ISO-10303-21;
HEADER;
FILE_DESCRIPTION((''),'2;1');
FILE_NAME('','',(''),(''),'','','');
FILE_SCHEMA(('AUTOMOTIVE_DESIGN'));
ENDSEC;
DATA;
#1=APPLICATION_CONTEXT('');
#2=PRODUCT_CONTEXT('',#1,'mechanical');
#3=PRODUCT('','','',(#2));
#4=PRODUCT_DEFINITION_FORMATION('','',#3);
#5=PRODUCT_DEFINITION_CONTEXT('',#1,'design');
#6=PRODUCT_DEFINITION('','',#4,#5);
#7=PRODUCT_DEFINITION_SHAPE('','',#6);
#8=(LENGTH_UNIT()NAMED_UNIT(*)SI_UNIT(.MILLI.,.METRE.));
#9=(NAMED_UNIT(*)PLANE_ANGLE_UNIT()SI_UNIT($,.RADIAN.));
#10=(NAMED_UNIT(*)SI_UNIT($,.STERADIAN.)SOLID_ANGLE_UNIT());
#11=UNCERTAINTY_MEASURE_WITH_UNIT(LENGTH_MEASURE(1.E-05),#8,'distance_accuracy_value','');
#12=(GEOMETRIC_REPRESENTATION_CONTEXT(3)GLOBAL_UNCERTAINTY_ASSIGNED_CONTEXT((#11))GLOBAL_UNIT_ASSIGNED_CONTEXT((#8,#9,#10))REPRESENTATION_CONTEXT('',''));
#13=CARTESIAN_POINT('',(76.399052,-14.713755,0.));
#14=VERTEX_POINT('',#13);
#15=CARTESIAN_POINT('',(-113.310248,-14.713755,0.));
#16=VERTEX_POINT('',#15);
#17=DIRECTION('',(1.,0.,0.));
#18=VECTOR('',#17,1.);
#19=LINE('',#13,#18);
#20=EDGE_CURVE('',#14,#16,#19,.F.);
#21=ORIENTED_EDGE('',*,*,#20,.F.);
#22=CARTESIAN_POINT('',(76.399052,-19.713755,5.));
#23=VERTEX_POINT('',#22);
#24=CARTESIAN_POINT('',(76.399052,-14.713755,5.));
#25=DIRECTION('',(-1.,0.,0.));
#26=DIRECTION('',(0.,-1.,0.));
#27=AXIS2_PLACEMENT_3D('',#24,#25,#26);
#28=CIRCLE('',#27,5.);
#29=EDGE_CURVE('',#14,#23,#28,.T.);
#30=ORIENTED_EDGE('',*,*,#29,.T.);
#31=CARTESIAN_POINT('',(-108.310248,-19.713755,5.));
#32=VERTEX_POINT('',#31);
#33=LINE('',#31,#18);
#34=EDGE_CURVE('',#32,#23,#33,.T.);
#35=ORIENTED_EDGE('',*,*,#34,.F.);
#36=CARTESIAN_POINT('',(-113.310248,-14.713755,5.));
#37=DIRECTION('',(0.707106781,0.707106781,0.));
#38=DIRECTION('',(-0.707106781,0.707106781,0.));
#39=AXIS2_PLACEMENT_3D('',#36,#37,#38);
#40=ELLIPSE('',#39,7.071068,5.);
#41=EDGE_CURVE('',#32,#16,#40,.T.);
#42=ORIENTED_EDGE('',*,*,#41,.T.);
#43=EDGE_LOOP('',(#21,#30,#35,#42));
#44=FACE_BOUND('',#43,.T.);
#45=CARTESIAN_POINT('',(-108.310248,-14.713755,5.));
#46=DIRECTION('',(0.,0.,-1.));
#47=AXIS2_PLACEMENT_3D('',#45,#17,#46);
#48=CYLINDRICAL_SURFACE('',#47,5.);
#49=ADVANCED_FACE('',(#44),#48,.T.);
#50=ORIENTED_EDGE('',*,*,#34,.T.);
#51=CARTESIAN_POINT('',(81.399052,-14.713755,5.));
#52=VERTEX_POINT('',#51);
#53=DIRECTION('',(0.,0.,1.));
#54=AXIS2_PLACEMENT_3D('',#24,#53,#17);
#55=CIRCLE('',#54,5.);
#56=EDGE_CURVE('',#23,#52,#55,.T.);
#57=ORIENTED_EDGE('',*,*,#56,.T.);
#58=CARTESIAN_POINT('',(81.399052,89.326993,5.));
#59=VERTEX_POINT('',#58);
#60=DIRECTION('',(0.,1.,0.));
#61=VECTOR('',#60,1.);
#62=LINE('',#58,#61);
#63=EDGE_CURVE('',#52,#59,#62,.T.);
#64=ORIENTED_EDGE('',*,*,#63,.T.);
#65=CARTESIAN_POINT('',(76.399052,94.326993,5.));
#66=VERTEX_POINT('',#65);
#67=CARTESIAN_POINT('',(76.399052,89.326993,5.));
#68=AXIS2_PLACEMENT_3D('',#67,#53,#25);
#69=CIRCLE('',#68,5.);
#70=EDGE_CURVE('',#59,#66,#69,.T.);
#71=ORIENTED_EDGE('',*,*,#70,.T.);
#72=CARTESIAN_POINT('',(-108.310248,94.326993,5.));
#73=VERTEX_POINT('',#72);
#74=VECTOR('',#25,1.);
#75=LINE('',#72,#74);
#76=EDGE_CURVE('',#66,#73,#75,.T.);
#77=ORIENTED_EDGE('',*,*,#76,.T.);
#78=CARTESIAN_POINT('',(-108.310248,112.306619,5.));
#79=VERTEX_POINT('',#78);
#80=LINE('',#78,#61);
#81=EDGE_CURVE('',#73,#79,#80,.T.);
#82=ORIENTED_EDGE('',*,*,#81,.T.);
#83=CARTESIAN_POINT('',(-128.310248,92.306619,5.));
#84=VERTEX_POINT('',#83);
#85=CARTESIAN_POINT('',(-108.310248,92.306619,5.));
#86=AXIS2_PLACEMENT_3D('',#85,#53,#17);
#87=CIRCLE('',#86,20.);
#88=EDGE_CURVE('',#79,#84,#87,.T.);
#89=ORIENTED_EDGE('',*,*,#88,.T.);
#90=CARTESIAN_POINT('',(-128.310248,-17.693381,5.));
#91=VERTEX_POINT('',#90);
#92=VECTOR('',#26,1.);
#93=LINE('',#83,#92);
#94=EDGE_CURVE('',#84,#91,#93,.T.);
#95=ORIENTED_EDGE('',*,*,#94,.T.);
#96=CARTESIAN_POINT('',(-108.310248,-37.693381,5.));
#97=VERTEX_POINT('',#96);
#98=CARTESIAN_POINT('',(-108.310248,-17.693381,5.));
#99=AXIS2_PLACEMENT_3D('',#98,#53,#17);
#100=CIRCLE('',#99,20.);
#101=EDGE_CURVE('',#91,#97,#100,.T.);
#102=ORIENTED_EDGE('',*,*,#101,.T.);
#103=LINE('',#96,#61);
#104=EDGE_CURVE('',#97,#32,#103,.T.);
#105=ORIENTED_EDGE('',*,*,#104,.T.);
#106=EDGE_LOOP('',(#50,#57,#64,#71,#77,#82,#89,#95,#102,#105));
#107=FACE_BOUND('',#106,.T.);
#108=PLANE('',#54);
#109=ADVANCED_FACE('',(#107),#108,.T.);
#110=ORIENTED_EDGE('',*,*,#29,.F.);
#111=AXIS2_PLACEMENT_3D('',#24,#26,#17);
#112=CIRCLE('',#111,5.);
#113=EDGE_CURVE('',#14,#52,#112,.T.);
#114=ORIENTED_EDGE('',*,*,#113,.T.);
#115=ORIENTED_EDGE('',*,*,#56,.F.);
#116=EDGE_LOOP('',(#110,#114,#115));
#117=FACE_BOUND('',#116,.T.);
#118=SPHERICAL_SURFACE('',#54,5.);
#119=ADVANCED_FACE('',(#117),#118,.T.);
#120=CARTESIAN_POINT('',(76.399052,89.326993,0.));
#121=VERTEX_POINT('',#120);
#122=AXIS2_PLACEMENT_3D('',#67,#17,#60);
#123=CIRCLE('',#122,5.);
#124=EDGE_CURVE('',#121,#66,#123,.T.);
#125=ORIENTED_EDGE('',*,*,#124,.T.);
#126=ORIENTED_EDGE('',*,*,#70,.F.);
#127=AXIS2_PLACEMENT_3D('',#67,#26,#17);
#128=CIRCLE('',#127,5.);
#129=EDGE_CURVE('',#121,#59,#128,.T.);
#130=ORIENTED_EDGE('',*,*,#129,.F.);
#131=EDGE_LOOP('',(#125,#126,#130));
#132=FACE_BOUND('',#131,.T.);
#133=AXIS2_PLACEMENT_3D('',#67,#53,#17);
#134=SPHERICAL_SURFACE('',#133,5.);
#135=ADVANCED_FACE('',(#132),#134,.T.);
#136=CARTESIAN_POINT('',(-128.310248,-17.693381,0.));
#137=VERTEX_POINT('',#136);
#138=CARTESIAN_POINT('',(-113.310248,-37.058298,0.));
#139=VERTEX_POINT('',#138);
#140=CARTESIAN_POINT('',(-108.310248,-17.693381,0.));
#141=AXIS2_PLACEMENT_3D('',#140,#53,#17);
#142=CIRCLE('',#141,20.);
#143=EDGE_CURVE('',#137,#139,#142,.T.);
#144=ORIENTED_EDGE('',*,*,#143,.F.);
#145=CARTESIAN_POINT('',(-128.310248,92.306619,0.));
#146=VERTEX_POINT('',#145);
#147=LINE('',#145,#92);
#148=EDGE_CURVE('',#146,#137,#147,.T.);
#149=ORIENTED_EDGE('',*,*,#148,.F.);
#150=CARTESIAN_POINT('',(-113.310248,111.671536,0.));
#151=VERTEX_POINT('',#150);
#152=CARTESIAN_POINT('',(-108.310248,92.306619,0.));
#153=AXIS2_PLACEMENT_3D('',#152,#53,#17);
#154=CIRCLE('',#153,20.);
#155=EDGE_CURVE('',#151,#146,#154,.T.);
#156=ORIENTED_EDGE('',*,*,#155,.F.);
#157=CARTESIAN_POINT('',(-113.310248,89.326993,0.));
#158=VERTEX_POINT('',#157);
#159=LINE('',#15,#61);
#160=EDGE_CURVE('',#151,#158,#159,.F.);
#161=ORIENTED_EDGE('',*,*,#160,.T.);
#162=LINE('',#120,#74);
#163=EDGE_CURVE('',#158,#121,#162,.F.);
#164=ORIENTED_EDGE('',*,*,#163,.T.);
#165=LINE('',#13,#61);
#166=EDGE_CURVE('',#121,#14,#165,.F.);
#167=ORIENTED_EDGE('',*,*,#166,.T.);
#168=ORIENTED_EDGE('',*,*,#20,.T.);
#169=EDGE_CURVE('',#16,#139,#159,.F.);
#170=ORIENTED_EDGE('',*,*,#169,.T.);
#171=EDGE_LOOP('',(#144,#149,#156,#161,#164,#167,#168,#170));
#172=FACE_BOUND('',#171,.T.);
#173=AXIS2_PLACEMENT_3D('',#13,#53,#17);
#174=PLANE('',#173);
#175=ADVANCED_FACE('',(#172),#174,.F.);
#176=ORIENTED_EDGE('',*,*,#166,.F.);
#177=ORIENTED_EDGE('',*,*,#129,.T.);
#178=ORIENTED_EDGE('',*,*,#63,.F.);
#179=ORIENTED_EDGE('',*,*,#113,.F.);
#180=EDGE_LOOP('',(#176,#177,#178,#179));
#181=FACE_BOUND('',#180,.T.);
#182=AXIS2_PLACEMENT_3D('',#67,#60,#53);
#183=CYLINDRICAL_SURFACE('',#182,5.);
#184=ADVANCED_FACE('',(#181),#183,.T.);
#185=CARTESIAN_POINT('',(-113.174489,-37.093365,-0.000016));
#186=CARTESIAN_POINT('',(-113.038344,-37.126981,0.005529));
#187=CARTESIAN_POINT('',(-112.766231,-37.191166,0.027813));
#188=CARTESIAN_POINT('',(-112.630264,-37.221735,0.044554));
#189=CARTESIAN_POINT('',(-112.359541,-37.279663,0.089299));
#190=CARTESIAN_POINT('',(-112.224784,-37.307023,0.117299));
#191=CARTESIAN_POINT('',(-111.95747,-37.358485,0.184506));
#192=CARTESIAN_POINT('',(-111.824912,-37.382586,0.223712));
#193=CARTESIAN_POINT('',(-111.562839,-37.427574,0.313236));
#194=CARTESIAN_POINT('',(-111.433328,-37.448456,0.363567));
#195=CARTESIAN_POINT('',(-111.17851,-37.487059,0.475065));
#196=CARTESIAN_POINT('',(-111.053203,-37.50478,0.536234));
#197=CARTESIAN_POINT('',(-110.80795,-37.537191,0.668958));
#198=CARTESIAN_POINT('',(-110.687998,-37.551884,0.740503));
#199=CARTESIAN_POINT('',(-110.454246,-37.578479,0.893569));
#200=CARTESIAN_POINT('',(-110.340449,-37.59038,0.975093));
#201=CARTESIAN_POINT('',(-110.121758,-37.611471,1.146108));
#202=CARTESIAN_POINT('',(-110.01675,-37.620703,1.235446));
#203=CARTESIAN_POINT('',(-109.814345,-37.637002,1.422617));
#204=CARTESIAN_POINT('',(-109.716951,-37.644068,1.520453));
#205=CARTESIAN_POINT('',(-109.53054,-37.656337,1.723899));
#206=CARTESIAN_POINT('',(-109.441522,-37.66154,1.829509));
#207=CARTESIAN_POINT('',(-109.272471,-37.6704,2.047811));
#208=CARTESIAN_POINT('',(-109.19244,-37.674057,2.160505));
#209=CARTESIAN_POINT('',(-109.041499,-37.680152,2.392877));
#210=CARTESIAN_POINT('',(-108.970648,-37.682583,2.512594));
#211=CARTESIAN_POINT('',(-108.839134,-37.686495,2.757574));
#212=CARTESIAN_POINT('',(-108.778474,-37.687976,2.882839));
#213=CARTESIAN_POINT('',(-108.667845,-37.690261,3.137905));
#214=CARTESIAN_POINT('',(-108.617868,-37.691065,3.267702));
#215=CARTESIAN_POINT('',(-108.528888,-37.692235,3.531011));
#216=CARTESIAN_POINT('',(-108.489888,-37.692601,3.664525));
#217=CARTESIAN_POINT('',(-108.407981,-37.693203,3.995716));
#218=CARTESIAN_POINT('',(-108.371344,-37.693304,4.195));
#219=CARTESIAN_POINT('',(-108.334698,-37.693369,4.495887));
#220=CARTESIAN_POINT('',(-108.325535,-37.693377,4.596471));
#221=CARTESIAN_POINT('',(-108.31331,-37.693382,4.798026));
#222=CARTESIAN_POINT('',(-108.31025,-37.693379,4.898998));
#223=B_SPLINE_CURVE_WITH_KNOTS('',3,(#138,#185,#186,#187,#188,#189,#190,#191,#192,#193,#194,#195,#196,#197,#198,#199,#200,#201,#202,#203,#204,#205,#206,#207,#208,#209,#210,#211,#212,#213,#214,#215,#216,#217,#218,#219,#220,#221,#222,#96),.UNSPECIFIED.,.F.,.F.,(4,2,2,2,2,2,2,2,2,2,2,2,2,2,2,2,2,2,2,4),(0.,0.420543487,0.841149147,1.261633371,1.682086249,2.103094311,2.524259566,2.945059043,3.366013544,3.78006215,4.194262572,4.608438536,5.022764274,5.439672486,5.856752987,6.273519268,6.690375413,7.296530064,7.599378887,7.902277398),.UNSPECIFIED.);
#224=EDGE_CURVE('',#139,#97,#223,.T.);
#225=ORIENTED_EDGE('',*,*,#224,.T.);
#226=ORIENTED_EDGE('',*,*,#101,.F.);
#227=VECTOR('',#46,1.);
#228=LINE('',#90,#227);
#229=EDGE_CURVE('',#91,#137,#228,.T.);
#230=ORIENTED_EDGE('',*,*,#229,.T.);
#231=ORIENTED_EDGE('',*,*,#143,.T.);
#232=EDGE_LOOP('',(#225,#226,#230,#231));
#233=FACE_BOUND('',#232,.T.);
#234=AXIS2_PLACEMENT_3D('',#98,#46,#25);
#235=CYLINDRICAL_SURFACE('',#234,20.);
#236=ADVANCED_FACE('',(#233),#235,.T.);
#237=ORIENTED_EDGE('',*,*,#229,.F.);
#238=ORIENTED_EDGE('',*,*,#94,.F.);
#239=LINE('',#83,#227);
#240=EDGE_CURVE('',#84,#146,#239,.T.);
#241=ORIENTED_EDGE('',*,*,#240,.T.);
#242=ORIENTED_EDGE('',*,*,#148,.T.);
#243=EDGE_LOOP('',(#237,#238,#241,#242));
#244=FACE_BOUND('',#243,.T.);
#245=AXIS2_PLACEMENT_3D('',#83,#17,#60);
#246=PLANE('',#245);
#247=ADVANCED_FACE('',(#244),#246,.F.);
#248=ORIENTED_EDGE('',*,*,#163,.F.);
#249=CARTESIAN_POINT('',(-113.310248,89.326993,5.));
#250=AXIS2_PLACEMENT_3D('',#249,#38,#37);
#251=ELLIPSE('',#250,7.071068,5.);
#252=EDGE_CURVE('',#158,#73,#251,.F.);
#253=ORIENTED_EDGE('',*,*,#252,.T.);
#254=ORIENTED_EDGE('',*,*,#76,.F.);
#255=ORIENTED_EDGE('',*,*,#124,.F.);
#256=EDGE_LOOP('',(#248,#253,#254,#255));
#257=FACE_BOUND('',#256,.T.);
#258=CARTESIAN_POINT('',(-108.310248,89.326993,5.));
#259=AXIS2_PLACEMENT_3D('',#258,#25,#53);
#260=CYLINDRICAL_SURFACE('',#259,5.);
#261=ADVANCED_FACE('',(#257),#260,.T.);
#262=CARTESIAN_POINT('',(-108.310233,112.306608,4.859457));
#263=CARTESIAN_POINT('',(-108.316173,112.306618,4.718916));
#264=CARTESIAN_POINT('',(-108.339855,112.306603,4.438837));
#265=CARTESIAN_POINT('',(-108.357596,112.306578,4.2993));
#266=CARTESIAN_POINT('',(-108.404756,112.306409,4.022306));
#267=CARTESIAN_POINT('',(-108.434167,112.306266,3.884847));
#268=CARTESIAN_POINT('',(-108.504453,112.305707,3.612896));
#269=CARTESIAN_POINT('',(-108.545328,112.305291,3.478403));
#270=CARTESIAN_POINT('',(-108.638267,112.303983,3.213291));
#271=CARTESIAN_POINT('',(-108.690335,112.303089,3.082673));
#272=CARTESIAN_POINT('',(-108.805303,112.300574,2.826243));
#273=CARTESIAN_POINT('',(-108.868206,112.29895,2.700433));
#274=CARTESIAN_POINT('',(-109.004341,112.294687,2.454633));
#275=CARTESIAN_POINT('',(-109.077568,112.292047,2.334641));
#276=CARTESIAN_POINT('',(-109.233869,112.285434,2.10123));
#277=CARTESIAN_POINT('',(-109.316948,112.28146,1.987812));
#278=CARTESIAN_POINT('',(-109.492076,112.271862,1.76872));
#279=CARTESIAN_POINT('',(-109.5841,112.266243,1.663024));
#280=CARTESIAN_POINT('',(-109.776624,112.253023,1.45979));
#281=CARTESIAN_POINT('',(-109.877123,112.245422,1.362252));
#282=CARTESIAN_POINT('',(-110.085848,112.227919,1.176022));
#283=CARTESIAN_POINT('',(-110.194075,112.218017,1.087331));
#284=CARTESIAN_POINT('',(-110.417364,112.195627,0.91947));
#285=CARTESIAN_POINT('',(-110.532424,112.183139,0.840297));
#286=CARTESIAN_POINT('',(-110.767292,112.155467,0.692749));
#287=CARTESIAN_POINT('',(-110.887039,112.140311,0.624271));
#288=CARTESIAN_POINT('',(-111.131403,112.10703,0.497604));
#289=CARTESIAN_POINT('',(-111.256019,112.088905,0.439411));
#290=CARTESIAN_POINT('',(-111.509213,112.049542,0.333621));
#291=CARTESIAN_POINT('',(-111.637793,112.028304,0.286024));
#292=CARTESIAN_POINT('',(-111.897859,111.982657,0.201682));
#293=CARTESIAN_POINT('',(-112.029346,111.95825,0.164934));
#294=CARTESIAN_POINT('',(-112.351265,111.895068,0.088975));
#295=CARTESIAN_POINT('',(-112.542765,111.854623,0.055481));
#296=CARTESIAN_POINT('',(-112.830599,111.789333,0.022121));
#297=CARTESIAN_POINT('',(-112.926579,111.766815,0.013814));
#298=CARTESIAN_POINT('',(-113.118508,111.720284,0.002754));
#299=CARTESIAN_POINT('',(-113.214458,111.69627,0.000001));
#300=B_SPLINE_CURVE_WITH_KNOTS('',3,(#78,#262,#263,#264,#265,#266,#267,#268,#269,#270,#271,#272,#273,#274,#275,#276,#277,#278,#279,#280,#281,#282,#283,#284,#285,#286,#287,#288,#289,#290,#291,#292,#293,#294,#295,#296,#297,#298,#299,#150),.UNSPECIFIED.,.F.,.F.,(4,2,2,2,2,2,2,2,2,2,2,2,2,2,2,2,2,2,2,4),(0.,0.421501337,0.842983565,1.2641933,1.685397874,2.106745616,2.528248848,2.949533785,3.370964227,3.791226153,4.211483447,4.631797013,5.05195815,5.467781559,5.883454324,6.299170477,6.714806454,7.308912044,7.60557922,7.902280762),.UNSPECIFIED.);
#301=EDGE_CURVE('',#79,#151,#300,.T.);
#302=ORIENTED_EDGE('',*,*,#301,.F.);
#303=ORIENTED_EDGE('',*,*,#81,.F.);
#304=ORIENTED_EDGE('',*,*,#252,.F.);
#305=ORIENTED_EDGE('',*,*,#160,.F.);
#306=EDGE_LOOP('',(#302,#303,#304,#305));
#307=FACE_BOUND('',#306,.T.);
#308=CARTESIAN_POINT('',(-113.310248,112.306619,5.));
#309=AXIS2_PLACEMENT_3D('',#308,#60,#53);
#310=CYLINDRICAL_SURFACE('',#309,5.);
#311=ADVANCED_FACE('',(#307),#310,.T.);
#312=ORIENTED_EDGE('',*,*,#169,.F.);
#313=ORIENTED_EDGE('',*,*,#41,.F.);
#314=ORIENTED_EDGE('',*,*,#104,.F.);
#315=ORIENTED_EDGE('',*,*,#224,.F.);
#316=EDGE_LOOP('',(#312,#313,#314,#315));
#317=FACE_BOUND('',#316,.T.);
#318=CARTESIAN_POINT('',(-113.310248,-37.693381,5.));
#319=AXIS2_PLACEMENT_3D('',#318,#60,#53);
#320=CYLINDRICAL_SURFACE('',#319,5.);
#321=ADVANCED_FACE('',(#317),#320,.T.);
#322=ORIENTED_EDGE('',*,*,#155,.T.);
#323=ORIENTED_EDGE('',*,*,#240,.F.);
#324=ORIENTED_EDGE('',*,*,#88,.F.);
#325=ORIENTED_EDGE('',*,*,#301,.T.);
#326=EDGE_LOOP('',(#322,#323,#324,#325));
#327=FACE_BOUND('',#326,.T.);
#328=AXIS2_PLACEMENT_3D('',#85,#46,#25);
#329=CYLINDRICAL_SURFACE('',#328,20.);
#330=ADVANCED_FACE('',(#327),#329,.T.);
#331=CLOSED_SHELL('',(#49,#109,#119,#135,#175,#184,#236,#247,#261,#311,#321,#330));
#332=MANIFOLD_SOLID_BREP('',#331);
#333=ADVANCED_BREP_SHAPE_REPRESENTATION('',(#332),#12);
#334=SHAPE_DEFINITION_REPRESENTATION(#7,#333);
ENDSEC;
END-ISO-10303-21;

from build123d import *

# Parameters (mm, degrees)
BOSS_EXTRUDE1_DEPTH = 5
FILLET1_R           = 5
FILLET3_R           = 5
FILLET4_R           = 5


with BuildPart() as part:
    # Sketch1 → Boss-Extrude1 (new body)
    with BuildSketch(Plane.XY):
        with BuildLine():
            Line((-108.310248072, -37.693381192), (-108.310248072, -19.713755061))
            Line((-108.310248072, -19.713755061), (76.399052405, -19.713755061))
            ThreePointArc((76.399052405, -19.713755061), (79.934586311, -18.249288967), (81.399052405, -14.713755061))
            Line((81.399052405, -14.713755061), (81.399052405, 89.326992678))
            ThreePointArc((81.399052405, 89.326992678), (79.934586311, 92.862526584), (76.399052405, 94.326992678))
            Line((76.399052405, 94.326992678), (-108.310248072, 94.326992678))
            Line((-108.310248072, 94.326992678), (-108.310248072, 112.306618808))
            ThreePointArc((-108.310248072, 112.306618808), (-122.452383696, 106.448754432), (-128.310248072, 92.306618808))
            Line((-128.310248072, 92.306618808), (-128.310248072, -17.693381192))
            ThreePointArc((-128.310248072, -17.693381192), (-122.452383696, -31.835516815), (-108.310248072, -37.693381192))
        make_face()
    extrude(amount=BOSS_EXTRUDE1_DEPTH)

    # Fillet1
    fillet1_edges = [part.edges().sort_by_distance(p)[0] for p in [
        (-15.955597834, -19.713755061, 0),
        (79.934586311, -18.249288967, 0),
        (81.399052405, 37.306618808, 0),
        (79.934586311, 92.862526584, 0),
        (-15.955597834, 94.326992678, 0),
    ]]
    fillet(fillet1_edges, radius=FILLET1_R - 0.0001)  # a hair under: the kernel refuses the full size

    # Fillet3
    fillet3_edges = [part.edges().sort_by_distance(p)[0] for p in [
        (-108.310248072, 100.816855743, 0),
    ]]
    fillet(fillet3_edges, radius=FILLET3_R - 0.0001)  # a hair under: the kernel refuses the full size

    # Fillet4
    fillet4_edges = [part.edges().sort_by_distance(p)[0] for p in [
        (-108.310248072, -26.203618126, 0),
    ]]
    fillet(fillet4_edges, radius=FILLET4_R - 0.0001)  # a hair under: the kernel refuses the full size


solid = part.part
